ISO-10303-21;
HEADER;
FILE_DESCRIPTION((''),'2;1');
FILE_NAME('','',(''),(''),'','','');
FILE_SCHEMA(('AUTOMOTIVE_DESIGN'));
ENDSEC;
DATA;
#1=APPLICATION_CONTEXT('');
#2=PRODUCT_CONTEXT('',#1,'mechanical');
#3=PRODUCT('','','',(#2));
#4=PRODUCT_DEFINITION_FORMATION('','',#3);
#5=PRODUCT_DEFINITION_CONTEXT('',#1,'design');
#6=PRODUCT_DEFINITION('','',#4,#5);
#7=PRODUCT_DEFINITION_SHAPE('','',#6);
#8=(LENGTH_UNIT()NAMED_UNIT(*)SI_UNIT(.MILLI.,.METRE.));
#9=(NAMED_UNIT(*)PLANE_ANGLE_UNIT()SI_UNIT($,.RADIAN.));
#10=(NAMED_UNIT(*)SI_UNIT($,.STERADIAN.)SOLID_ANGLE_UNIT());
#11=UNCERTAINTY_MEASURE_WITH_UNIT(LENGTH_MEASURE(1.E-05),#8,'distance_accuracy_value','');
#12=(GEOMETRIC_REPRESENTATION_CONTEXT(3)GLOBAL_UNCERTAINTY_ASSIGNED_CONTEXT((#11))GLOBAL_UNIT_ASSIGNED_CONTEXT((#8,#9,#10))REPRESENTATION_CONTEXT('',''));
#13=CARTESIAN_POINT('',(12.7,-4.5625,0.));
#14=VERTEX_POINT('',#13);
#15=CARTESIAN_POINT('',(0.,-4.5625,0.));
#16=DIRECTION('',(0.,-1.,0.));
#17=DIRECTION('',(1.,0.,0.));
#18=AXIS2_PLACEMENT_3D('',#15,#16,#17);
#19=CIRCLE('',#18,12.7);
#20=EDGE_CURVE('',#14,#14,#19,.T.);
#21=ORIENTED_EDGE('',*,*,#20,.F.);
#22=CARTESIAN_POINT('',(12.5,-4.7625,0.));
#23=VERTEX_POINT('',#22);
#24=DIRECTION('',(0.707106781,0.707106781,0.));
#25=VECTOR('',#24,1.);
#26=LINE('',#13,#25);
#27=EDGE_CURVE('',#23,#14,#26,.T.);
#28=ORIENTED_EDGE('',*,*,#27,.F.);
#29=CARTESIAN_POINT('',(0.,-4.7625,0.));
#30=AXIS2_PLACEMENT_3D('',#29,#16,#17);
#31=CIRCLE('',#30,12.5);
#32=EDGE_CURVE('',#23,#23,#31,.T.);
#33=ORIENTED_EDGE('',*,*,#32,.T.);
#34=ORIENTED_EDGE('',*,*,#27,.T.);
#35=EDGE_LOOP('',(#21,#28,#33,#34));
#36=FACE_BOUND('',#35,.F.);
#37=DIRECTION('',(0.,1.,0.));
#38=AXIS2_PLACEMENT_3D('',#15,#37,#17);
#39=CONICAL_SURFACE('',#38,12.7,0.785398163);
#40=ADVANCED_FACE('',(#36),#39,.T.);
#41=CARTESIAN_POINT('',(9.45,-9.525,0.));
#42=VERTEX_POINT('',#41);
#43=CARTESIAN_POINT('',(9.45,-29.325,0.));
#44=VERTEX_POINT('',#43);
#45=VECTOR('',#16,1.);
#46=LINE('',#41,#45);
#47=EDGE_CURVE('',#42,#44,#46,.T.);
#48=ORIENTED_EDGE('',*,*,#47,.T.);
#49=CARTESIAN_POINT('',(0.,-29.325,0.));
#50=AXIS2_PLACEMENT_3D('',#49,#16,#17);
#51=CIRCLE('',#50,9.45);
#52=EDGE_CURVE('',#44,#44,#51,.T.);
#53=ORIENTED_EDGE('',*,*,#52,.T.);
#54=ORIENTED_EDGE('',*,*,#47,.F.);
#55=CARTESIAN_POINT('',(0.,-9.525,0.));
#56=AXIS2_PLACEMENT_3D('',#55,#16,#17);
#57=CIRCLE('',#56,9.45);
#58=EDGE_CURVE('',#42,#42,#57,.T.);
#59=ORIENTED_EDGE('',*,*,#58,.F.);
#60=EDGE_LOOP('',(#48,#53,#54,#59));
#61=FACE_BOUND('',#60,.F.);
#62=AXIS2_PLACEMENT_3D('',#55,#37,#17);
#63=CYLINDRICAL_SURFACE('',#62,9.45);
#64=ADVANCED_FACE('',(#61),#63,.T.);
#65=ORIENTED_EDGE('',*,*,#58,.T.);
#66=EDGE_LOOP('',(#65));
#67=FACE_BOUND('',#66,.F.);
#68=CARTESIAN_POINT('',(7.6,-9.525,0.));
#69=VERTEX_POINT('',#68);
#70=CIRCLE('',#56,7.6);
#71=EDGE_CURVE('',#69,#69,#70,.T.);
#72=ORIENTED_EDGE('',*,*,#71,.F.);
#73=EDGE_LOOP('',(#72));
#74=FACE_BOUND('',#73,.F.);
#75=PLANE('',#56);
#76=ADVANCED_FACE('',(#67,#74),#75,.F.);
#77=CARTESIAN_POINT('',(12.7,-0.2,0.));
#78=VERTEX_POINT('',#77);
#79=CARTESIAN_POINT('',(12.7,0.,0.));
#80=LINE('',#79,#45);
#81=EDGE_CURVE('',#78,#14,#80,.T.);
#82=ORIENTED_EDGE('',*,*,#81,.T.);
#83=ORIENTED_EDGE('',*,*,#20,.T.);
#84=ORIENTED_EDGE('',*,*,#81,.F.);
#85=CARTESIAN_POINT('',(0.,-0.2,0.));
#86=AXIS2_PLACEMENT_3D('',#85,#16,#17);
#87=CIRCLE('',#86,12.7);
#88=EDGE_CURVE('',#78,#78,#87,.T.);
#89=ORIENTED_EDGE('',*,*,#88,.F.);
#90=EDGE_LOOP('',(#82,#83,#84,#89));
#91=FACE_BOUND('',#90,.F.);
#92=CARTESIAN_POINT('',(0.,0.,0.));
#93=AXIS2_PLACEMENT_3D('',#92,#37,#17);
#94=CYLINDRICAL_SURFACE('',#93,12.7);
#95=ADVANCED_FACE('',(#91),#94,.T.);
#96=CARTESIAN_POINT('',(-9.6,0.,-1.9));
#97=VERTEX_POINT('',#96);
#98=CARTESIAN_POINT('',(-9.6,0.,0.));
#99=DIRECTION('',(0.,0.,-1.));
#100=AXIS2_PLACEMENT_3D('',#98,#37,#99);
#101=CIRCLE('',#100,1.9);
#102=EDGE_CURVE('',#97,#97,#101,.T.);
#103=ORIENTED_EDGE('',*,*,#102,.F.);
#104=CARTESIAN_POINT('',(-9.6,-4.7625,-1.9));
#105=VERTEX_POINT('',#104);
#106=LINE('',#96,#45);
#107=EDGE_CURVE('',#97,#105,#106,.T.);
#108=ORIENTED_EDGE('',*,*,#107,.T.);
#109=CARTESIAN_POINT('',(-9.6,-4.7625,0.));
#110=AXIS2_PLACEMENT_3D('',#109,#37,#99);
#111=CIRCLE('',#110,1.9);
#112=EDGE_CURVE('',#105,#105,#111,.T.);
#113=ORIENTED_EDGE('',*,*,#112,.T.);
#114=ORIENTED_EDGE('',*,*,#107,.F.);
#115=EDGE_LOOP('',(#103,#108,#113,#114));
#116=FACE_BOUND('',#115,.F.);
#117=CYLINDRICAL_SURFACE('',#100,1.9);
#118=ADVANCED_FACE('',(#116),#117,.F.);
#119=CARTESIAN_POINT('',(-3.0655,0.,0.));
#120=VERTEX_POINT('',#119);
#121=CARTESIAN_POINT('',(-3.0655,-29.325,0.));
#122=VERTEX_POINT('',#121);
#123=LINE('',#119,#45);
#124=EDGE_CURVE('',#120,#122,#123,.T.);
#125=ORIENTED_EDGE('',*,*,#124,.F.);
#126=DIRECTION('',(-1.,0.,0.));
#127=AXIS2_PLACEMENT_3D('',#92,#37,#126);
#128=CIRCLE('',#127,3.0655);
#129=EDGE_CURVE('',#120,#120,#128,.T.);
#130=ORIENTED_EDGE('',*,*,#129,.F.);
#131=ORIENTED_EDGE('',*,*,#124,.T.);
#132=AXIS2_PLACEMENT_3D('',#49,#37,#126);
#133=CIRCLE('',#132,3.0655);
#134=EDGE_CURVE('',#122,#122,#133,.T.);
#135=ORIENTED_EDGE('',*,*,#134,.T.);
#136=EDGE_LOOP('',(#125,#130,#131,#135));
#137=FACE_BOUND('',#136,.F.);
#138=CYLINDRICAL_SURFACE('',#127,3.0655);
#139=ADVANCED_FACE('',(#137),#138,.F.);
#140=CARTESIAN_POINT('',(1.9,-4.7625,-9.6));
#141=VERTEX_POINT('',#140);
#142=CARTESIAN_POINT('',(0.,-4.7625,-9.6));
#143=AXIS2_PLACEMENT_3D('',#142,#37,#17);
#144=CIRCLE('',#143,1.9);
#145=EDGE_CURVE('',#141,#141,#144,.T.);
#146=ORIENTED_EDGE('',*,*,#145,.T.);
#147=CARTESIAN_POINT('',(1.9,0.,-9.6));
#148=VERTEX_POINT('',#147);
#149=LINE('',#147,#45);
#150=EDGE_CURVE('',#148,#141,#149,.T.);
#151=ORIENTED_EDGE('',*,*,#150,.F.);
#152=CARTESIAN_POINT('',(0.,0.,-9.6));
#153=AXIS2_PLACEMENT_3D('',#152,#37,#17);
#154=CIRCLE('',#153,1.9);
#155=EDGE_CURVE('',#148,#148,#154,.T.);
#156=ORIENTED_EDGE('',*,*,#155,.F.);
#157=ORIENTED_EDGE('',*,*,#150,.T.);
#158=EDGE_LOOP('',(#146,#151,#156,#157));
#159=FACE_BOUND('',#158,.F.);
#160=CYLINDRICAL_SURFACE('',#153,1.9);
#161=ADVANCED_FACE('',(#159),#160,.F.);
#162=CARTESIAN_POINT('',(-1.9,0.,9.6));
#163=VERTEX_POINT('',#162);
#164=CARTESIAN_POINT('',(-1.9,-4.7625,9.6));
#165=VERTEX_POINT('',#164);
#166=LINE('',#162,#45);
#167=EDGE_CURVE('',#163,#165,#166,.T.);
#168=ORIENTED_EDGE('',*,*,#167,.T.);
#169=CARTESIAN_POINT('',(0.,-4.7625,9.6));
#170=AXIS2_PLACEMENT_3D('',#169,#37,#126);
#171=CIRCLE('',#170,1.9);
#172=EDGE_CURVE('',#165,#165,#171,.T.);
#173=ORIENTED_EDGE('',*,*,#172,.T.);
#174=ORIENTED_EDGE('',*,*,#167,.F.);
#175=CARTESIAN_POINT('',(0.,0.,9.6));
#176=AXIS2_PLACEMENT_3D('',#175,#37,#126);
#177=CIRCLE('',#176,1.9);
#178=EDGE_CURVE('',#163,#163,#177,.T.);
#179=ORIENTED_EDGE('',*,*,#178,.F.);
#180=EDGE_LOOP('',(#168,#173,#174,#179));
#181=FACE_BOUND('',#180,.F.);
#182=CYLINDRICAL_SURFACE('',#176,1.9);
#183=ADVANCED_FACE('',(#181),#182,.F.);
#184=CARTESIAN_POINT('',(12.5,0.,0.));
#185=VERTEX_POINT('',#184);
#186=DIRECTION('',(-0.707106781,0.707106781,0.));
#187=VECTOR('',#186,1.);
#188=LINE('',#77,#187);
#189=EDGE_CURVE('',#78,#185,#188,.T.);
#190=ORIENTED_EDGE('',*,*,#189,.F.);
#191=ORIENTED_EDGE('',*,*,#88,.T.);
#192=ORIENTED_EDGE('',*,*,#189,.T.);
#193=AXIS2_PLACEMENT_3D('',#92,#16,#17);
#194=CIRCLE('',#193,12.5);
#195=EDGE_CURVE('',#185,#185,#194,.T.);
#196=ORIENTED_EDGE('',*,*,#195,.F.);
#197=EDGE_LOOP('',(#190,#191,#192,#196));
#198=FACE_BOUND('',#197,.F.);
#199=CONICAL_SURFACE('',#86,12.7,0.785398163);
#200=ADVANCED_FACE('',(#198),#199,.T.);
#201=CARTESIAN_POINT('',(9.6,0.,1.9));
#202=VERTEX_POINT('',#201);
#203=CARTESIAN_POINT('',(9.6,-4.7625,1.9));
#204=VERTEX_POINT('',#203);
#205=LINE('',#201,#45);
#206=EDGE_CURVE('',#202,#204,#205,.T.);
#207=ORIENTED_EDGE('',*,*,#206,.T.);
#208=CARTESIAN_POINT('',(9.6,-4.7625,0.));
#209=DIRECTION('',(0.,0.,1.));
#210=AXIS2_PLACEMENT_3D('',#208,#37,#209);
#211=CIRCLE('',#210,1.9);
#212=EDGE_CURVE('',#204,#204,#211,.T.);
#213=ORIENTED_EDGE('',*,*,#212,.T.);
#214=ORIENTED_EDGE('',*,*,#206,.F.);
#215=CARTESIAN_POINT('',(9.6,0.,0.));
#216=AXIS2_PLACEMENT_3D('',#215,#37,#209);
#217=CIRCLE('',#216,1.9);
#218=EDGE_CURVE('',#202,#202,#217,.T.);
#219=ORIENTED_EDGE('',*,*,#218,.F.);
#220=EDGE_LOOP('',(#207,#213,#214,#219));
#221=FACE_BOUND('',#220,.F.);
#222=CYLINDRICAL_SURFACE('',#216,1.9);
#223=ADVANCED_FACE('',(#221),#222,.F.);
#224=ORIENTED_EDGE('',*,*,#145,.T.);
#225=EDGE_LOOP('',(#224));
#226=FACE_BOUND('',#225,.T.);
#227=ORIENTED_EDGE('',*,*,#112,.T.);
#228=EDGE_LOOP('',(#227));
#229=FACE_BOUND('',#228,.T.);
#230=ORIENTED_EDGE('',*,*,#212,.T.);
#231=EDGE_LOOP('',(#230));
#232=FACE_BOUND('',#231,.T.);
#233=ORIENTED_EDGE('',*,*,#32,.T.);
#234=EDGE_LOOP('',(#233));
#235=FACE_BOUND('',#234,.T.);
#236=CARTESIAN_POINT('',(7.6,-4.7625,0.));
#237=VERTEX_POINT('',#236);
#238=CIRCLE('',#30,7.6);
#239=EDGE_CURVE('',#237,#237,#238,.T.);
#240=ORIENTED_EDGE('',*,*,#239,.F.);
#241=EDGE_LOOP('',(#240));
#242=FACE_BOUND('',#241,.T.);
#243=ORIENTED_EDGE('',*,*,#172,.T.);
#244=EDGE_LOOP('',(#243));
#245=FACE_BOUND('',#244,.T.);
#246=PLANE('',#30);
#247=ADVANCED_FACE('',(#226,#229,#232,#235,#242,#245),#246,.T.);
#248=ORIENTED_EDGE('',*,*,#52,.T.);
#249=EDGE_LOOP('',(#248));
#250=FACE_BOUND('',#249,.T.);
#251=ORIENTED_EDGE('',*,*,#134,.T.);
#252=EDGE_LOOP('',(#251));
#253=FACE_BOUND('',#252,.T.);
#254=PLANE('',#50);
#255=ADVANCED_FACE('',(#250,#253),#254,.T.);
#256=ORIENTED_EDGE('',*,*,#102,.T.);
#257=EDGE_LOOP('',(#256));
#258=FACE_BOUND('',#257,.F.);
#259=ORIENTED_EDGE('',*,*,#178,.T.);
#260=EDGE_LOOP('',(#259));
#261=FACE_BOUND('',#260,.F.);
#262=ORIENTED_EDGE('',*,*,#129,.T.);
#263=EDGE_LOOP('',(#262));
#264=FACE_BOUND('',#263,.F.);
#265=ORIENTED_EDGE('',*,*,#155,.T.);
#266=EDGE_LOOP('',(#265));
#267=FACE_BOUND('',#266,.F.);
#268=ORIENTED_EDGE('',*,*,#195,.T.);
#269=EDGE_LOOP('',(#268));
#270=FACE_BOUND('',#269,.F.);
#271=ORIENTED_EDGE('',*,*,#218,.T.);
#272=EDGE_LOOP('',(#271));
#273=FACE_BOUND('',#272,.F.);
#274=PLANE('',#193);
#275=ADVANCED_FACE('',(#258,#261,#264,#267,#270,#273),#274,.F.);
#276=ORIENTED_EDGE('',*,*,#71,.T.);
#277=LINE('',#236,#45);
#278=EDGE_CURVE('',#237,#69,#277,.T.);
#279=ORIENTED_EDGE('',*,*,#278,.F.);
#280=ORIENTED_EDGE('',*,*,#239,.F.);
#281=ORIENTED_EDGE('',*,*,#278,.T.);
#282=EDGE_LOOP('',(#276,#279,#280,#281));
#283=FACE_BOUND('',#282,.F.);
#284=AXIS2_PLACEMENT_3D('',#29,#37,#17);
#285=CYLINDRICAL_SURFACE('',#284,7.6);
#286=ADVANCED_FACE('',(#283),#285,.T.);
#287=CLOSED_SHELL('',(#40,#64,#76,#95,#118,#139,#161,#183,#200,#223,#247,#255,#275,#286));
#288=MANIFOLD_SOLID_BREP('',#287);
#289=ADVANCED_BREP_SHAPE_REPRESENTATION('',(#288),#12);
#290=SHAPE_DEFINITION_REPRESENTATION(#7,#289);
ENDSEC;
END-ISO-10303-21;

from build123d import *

# Parameters (mm, degrees)
F0_R            = 12.7
F1_DEPTH        = 4.7625
F2_R            = 7.6
F3_DEPTH        = 4.7625
F4_R            = 9.45
F4_R_2          = 7.6
F5_DEPTH        = 19.8
F6_SIZE         = 0.2
F7_R            = 1.9
F9_DEPTH        = 4.7625
F9_COPIES_COUNT = 4
F10_R           = 3.0655
F11_DEPTH       = 29.325


# Not quite as in the source:
# - a pattern or mirror of a feature is missing from the dataset's text; its kind, count and spacing are read off the source's solid


with BuildPart() as f1:
    # F0 (on Front) → F1 (new body)
    with BuildSketch(Plane.XZ):
        Circle(F0_R)
    extrude(amount=F1_DEPTH)

    # F2 (on face) → F3 (join)
    with BuildSketch(Plane.XZ.offset(4.7625)):
        Circle(F2_R)
    extrude(amount=F3_DEPTH)

    # F4 (on face) → F5 (join)
    with BuildSketch(Plane.XZ.offset(9.525)):
        Circle(F4_R)
        Circle(F4_R_2, mode=Mode.SUBTRACT)
        Circle(F4_R_2)
    extrude(amount=F5_DEPTH)

    # F6
    f6_edges = [f1.edges().sort_by_distance(p)[0] for p in [
        (-12.7, 0, 0),
        (-12.7, -4.7625, 0),
    ]]
    chamfer(f6_edges, length=F6_SIZE)

    # F7 (on face) → F9 (cut, through all)
    with BuildSketch(Plane(origin=(0, 0, 0), x_dir=(-1, 0, 0), z_dir=(0, 1, 0))):
        with Locations((0, 9.6)):
            Circle(F7_R)
    f9 = extrude(amount=-F9_DEPTH, mode=Mode.SUBTRACT)

    # F9_copies: F9 ×4 about axis
    f9_copies_axis = Axis((0, 0, 0), (0, 1, 0))
    for i in range(1, F9_COPIES_COUNT):
        add(f9.rotate(f9_copies_axis, i * 360 / F9_COPIES_COUNT), mode=Mode.SUBTRACT)

    # F10 (on face) → F11 (cut, through all)
    with BuildSketch(Plane(origin=(0, 0, 0), x_dir=(-1, 0, 0), z_dir=(0, 1, 0))):
        Circle(F10_R)
    extrude(amount=-F11_DEPTH, mode=Mode.SUBTRACT)


solid = f1.part
